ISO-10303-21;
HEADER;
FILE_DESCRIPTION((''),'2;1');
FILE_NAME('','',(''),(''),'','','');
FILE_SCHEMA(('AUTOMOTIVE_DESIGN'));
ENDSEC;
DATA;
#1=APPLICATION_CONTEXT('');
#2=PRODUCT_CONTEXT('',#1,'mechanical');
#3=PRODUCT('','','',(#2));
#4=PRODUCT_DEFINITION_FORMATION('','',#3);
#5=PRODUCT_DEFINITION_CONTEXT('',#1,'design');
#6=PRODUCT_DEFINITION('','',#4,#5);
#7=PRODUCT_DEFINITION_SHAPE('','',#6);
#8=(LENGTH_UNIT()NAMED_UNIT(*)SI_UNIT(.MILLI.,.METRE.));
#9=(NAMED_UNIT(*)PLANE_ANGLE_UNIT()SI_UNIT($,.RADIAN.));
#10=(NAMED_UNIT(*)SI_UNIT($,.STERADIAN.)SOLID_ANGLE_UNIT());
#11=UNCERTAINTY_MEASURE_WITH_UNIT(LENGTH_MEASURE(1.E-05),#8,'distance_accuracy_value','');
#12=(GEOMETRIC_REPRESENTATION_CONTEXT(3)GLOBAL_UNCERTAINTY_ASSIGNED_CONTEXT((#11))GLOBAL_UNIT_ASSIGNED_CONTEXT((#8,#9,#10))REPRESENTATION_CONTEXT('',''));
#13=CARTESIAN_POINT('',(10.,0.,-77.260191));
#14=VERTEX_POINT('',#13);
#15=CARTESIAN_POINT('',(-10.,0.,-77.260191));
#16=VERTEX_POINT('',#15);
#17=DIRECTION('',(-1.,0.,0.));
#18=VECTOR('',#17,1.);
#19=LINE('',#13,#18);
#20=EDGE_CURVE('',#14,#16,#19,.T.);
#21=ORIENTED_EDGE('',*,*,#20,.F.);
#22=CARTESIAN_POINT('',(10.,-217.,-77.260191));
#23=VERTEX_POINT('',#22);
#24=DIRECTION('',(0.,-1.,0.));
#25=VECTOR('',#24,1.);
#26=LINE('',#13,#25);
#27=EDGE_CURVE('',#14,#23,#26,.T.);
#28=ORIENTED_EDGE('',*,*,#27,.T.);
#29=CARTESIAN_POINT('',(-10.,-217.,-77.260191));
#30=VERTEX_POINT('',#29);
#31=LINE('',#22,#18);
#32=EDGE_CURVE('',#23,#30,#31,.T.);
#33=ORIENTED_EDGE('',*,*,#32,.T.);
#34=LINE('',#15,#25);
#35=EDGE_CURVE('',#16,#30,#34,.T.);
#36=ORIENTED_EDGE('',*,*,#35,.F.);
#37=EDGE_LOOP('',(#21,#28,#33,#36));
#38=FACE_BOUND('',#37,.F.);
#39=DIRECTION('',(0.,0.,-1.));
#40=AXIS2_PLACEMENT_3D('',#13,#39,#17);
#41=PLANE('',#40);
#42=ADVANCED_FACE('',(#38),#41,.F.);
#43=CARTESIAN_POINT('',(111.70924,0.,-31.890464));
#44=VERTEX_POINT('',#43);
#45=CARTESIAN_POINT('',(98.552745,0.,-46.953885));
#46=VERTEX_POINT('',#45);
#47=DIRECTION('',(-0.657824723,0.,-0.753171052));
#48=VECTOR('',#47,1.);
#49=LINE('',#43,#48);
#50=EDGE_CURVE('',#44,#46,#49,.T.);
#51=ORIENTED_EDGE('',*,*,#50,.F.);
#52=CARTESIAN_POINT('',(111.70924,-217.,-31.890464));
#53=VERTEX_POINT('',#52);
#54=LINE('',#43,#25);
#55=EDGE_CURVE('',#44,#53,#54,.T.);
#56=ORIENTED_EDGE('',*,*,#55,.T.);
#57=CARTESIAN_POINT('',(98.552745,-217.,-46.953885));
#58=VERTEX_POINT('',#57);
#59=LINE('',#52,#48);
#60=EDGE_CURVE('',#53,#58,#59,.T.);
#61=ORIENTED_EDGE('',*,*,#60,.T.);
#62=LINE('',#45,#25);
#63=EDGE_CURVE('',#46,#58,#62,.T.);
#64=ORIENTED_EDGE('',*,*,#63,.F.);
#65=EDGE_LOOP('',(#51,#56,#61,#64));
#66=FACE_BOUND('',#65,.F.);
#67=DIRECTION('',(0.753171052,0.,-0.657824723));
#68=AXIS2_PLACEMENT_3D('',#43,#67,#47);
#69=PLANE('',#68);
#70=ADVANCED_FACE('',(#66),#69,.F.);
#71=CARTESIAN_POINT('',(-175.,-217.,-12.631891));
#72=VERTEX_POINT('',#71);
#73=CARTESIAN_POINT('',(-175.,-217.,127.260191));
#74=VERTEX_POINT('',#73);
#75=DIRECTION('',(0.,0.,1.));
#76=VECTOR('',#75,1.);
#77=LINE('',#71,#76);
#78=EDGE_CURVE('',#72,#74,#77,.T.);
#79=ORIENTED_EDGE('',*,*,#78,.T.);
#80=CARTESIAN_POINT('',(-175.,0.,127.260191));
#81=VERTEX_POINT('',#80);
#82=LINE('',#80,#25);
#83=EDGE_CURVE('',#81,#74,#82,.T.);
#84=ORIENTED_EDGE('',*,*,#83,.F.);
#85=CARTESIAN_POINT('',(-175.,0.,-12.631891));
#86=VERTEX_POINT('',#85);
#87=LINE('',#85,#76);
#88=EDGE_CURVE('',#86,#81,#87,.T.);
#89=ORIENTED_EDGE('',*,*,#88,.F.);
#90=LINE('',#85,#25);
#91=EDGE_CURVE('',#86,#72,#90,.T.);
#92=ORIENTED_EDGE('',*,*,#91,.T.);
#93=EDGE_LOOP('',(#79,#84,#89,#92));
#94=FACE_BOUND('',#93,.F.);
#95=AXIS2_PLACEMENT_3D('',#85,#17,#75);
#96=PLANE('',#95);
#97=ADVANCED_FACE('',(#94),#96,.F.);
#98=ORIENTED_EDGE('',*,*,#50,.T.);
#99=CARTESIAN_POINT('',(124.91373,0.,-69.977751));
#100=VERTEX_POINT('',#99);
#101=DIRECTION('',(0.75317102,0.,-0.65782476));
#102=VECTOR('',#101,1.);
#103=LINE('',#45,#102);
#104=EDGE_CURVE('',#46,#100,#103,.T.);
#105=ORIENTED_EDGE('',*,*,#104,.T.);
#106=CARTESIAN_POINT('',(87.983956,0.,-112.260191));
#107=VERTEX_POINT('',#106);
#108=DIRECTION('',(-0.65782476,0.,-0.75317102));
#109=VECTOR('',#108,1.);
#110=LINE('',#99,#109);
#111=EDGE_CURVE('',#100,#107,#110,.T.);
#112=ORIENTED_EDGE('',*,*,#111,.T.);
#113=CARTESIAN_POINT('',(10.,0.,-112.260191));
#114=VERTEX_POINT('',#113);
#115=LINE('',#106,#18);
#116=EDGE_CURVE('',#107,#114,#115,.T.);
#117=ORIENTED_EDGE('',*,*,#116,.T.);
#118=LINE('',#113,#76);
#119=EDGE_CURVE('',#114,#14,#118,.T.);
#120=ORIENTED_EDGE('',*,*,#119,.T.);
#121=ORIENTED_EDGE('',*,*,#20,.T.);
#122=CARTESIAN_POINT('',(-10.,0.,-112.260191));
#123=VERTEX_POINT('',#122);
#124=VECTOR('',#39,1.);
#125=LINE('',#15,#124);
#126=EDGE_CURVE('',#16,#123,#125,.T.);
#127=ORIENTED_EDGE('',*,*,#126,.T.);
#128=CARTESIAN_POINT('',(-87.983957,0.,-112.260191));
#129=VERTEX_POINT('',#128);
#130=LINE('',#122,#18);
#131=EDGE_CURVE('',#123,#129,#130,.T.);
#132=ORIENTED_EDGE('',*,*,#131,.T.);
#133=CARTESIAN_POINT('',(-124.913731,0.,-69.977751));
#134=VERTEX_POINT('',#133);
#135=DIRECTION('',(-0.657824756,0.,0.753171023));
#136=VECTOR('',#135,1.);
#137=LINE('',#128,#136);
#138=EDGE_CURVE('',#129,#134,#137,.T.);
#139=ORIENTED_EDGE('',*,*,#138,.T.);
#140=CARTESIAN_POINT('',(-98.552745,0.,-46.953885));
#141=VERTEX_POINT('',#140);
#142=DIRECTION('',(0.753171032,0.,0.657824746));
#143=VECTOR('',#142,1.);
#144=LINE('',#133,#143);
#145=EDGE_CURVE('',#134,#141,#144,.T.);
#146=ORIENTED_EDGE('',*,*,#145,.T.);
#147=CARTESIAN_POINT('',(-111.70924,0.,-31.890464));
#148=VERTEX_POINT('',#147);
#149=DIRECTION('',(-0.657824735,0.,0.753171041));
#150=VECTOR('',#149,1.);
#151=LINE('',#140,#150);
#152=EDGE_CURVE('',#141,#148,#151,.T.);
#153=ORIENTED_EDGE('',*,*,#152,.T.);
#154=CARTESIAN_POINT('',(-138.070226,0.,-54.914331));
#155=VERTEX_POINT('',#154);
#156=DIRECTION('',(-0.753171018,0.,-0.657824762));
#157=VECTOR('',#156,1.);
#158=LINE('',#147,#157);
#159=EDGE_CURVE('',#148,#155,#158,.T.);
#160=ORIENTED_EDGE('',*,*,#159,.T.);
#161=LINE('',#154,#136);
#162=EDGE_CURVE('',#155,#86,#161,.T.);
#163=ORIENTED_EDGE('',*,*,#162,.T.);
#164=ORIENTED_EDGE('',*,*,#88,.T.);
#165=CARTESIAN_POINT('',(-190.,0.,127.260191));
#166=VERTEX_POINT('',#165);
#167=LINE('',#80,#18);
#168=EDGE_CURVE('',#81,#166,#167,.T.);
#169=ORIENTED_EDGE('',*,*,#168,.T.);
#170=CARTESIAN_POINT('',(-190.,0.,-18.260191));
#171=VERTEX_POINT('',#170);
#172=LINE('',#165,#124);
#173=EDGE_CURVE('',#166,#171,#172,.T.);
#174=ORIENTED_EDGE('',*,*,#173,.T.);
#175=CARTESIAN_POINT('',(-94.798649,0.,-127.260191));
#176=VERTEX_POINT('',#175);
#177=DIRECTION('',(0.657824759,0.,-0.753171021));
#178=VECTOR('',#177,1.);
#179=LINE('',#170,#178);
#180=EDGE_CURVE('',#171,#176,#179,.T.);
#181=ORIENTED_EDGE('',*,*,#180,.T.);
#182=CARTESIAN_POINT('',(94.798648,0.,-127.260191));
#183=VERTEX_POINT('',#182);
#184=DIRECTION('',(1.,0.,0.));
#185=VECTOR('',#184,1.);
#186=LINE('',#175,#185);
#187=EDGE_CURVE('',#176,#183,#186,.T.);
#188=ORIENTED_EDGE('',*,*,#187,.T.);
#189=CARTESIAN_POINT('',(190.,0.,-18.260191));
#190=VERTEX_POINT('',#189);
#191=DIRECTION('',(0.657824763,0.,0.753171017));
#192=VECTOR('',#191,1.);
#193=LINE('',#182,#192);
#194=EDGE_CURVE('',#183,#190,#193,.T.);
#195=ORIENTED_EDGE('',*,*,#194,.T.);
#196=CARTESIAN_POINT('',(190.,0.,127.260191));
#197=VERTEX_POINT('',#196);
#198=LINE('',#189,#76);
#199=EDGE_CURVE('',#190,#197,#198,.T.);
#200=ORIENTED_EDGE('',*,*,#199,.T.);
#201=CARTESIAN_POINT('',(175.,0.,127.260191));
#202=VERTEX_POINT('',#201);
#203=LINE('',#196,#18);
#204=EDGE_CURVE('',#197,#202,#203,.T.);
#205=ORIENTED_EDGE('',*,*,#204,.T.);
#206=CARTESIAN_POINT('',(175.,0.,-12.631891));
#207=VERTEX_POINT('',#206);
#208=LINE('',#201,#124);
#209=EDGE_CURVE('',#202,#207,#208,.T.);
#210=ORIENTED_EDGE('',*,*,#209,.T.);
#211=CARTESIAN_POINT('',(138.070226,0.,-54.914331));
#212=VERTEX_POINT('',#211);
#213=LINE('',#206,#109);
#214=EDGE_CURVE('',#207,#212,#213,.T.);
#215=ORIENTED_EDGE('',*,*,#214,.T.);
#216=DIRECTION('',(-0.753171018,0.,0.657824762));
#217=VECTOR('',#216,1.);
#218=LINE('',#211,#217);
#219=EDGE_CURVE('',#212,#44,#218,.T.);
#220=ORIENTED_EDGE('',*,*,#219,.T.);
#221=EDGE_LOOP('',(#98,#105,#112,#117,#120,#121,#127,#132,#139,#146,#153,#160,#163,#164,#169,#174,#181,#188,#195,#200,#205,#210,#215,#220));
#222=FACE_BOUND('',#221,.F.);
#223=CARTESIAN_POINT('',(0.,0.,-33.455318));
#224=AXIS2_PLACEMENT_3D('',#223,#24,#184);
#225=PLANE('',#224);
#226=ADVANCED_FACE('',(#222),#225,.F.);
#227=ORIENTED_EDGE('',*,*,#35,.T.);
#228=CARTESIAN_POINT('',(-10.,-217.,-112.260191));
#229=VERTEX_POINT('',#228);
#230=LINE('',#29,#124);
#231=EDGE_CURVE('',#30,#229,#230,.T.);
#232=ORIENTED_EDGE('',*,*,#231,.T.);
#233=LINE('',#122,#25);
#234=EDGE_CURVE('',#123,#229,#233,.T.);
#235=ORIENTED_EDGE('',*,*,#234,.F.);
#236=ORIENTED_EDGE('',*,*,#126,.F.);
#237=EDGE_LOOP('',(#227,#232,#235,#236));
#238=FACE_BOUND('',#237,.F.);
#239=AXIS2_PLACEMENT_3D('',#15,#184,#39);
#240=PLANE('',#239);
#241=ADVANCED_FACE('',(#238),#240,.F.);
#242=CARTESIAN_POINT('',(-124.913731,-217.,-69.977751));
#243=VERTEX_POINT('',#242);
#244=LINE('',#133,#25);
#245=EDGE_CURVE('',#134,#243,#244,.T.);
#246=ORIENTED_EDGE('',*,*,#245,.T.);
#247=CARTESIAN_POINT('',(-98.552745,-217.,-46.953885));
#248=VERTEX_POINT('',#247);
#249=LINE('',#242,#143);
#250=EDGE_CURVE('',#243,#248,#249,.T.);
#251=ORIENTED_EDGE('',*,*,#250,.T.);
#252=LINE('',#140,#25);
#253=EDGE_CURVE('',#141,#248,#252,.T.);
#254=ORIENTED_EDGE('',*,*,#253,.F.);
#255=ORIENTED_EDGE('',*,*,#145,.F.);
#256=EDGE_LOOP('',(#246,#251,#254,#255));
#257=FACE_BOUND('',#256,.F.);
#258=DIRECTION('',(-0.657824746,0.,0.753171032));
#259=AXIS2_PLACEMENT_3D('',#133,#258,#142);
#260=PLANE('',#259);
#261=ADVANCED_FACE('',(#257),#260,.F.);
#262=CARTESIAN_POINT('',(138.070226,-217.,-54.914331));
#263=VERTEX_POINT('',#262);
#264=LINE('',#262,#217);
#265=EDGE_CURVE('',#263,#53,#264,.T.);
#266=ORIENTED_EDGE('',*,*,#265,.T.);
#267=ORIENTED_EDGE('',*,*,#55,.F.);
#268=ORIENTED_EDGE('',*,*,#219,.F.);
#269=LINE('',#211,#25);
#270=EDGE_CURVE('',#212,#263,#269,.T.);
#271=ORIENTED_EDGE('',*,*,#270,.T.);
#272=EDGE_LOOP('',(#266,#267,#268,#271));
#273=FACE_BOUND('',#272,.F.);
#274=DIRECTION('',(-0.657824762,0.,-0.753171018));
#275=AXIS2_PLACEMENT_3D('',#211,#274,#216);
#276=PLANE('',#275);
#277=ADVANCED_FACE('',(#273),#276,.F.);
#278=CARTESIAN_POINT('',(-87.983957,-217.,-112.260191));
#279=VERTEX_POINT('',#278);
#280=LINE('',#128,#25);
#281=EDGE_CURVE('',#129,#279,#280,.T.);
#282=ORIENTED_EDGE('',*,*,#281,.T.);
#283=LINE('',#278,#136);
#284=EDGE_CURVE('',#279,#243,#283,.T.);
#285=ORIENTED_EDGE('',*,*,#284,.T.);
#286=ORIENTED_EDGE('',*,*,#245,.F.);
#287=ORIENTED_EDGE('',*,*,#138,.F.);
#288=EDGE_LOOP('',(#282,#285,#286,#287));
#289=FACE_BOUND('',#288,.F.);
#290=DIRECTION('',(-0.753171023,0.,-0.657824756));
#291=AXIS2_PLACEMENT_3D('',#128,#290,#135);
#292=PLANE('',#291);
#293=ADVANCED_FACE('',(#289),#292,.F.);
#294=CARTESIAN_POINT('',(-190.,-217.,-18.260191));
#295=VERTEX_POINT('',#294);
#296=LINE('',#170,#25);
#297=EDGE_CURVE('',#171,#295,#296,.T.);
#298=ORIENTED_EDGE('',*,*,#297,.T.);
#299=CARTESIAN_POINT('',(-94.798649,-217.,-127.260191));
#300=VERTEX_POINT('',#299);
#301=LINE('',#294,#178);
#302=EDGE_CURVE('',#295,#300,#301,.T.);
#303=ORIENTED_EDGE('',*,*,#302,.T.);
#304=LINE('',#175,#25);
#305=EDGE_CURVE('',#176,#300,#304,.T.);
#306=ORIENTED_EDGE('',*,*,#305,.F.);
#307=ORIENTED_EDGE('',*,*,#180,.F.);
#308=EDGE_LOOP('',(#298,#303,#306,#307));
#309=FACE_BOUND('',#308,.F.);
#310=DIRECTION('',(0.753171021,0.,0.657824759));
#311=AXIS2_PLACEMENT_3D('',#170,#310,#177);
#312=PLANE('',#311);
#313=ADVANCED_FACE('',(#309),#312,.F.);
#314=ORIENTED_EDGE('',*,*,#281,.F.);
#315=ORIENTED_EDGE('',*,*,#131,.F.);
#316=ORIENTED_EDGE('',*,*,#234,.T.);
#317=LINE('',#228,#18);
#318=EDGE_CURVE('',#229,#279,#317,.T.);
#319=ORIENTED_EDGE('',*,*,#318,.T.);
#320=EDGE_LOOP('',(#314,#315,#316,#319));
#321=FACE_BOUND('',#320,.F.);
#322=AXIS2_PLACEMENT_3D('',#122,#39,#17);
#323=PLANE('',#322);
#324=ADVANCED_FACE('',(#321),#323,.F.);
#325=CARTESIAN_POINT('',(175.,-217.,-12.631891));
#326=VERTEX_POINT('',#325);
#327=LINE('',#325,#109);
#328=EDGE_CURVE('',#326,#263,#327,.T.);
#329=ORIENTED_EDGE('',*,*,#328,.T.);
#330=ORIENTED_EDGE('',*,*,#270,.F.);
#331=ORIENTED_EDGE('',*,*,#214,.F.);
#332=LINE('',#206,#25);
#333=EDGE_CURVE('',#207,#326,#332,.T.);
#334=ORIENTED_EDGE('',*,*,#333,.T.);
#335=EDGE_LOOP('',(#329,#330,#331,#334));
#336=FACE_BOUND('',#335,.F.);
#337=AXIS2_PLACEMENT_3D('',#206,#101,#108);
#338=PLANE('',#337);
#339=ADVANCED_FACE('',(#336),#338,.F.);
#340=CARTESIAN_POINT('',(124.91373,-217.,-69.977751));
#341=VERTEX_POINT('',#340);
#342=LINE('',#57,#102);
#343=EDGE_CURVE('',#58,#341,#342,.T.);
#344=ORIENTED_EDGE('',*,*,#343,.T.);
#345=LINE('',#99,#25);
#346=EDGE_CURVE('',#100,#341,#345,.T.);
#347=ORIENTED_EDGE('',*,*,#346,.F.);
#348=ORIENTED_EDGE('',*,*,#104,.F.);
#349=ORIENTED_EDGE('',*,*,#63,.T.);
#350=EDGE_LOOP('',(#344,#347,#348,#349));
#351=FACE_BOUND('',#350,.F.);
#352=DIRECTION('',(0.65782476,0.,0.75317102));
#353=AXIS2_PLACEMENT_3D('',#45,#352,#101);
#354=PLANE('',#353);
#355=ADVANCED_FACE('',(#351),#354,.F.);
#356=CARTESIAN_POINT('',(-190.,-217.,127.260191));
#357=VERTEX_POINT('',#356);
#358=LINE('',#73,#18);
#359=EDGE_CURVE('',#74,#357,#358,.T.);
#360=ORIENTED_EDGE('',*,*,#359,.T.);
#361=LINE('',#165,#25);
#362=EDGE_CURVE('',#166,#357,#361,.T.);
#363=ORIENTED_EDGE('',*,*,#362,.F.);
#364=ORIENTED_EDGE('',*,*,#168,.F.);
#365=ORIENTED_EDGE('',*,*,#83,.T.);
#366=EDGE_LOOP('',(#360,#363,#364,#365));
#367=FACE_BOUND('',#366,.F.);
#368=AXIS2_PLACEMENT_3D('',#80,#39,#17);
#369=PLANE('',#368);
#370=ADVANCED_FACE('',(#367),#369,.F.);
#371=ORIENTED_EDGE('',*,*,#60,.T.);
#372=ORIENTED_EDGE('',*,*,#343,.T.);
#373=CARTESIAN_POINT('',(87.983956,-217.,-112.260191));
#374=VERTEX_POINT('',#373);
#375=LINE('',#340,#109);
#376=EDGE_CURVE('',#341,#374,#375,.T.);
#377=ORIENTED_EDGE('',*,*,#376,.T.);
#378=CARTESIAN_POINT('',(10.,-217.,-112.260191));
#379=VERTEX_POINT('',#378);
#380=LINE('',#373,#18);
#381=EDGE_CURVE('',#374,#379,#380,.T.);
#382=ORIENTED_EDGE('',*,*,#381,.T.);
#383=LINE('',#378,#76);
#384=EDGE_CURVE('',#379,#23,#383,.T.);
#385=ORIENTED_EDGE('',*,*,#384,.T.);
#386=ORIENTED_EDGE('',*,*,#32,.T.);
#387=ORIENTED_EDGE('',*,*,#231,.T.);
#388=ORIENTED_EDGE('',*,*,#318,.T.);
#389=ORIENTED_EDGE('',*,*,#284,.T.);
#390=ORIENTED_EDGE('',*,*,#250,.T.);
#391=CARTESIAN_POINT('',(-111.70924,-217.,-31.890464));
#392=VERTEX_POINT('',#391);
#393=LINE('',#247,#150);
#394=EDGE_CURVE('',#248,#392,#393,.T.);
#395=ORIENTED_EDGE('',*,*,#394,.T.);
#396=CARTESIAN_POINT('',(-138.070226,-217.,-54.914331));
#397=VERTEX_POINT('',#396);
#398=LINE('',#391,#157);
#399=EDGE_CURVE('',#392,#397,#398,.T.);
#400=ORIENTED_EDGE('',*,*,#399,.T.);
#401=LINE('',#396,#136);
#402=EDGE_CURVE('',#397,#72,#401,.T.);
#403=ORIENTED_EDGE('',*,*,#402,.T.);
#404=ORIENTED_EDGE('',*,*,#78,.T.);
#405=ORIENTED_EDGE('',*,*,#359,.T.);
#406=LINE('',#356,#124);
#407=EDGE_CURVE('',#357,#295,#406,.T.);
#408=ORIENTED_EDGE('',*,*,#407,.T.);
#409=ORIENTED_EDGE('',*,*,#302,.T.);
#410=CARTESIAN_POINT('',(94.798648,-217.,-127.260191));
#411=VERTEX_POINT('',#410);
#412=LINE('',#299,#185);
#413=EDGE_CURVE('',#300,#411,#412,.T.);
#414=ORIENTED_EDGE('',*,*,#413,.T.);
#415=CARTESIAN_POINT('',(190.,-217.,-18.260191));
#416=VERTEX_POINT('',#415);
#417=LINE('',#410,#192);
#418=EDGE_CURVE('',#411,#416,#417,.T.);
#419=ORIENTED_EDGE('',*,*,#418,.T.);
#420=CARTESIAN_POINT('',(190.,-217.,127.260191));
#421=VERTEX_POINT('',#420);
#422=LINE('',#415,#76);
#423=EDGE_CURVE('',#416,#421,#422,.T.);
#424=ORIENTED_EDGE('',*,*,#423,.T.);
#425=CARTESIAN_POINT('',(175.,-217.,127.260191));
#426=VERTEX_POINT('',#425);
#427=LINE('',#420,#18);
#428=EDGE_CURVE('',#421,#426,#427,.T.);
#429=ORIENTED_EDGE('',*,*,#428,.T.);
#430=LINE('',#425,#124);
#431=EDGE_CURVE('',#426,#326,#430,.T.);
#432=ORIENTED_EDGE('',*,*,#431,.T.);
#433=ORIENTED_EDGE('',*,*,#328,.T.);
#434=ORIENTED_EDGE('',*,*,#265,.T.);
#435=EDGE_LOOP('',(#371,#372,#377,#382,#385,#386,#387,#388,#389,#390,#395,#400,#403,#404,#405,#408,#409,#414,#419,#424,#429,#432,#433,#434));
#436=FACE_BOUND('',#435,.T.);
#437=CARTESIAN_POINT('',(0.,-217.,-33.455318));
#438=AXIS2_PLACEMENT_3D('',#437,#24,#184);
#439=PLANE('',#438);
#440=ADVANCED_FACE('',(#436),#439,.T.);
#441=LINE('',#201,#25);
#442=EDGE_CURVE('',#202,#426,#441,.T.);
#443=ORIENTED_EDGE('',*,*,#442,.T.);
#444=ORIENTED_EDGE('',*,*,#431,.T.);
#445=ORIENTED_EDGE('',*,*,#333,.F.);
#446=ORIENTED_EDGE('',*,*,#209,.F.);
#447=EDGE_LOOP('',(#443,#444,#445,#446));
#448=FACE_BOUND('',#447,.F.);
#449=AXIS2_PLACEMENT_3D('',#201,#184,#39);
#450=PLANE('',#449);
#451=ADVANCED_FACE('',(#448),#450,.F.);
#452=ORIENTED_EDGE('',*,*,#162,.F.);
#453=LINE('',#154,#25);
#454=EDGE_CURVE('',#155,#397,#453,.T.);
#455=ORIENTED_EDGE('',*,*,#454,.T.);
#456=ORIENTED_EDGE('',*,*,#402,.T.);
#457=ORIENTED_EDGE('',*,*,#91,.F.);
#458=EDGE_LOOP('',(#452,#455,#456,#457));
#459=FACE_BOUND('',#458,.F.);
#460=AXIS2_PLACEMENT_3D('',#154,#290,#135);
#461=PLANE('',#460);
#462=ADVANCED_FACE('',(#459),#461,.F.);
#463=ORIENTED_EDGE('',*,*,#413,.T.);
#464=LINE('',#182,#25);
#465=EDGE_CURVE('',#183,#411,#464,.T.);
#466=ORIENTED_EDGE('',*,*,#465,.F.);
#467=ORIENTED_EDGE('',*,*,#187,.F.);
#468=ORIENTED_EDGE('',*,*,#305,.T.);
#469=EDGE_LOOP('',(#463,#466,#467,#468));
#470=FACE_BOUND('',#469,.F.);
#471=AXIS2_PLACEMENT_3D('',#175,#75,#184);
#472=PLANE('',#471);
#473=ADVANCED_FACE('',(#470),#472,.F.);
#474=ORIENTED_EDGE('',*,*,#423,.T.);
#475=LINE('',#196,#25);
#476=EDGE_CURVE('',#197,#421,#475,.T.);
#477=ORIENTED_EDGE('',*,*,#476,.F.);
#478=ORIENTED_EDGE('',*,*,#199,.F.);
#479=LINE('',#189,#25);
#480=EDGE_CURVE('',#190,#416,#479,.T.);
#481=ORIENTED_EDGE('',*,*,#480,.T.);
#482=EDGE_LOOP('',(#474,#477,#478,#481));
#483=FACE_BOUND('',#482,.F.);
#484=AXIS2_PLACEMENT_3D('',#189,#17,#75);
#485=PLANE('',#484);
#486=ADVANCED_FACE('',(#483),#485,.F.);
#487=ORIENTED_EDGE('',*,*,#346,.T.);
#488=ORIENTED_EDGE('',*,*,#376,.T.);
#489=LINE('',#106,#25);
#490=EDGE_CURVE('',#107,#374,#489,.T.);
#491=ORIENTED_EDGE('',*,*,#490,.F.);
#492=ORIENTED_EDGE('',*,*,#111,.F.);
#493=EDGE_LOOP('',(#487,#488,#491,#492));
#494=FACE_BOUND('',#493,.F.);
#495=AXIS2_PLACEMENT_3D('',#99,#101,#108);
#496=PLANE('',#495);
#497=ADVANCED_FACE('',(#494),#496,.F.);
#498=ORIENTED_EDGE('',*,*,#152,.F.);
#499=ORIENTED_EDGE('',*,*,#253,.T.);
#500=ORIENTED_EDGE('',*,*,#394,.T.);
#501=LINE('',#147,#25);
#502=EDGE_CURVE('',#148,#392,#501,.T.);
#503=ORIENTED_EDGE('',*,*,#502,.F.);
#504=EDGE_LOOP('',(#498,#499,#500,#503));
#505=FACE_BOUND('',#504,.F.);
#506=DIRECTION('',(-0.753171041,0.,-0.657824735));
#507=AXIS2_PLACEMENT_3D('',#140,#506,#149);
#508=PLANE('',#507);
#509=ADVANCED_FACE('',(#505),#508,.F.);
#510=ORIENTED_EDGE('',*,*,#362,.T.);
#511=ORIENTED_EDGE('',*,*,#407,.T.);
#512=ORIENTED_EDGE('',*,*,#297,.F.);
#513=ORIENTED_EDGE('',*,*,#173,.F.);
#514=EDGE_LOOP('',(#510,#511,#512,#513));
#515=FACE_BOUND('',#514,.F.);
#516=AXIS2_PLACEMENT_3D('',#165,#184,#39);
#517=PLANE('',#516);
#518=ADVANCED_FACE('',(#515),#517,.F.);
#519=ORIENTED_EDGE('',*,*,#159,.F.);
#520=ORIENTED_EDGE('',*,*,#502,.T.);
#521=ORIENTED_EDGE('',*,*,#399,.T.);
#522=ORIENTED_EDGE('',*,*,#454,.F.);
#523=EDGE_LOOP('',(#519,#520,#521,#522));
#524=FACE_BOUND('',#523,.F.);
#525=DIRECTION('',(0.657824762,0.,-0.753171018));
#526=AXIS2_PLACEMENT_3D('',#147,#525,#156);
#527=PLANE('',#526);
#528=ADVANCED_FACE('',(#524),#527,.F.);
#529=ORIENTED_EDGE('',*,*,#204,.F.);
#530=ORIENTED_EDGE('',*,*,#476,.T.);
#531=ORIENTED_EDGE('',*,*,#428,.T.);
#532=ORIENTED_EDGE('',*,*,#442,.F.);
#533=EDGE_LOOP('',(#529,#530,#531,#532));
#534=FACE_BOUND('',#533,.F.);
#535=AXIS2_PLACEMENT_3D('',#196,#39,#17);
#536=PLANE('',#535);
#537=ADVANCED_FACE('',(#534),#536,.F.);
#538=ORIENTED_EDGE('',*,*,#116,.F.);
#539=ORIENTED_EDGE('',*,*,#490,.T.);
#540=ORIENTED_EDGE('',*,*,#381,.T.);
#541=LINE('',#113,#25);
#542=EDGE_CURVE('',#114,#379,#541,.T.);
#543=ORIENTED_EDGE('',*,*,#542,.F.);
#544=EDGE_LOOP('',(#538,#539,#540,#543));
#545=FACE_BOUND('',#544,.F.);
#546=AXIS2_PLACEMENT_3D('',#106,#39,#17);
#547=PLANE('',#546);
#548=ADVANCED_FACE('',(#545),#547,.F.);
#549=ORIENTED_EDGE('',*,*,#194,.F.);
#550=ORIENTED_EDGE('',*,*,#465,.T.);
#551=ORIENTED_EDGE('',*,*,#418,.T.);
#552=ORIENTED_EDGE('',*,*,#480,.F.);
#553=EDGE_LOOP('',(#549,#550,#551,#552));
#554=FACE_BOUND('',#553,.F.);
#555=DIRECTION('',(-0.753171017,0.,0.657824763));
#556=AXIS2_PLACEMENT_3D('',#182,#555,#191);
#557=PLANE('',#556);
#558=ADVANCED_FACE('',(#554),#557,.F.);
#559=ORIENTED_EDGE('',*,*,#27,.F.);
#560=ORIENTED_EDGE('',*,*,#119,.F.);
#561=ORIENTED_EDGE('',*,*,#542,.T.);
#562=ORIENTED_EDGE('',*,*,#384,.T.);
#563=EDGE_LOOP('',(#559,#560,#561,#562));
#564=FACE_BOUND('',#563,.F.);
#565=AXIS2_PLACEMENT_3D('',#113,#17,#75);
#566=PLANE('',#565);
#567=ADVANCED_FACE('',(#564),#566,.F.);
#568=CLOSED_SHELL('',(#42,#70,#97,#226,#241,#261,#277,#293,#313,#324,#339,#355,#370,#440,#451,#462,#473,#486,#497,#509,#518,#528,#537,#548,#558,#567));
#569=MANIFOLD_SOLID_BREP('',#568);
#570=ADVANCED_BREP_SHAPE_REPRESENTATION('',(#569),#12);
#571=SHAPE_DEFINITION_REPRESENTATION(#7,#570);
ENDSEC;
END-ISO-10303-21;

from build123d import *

# Parameters (mm, degrees)
F1_DEPTH = 217


# Not quite as in the source:
# - ends of sketch curves that miss each other by under 0.0002 mm in the source are joined


with BuildPart() as f1:
    # F0 (on Front) → F1 (new body)
    with BuildSketch(Plane.XZ):
        Polygon((-175, 127.260191), (-190, 127.260191), (-190, -18.260191), (-94.798649, -127.260191), (0, -127.260191), (94.798648, -127.260191), (190, -18.260191), (190, 127.260191), (175, 127.260191), (175, -12.631891), (138.0702256785, -54.9143307192), (111.7092396785, -31.8904637192), (98.552745, -46.953885), (124.9137303215, -69.9777512808), (87.983956, -112.260191), (10, -112.260191), (10, -77.260191), (-10, -77.260191), (-10, -112.260191), (-87.983957, -112.260191), (-124.9137310807, -69.9777510705), (-98.5527450807, -46.9538850705), (-111.70924, -31.890464), (-138.0702259193, -54.9143309295), (-175, -12.631891), align=None)
    extrude(amount=F1_DEPTH)


solid = f1.part
